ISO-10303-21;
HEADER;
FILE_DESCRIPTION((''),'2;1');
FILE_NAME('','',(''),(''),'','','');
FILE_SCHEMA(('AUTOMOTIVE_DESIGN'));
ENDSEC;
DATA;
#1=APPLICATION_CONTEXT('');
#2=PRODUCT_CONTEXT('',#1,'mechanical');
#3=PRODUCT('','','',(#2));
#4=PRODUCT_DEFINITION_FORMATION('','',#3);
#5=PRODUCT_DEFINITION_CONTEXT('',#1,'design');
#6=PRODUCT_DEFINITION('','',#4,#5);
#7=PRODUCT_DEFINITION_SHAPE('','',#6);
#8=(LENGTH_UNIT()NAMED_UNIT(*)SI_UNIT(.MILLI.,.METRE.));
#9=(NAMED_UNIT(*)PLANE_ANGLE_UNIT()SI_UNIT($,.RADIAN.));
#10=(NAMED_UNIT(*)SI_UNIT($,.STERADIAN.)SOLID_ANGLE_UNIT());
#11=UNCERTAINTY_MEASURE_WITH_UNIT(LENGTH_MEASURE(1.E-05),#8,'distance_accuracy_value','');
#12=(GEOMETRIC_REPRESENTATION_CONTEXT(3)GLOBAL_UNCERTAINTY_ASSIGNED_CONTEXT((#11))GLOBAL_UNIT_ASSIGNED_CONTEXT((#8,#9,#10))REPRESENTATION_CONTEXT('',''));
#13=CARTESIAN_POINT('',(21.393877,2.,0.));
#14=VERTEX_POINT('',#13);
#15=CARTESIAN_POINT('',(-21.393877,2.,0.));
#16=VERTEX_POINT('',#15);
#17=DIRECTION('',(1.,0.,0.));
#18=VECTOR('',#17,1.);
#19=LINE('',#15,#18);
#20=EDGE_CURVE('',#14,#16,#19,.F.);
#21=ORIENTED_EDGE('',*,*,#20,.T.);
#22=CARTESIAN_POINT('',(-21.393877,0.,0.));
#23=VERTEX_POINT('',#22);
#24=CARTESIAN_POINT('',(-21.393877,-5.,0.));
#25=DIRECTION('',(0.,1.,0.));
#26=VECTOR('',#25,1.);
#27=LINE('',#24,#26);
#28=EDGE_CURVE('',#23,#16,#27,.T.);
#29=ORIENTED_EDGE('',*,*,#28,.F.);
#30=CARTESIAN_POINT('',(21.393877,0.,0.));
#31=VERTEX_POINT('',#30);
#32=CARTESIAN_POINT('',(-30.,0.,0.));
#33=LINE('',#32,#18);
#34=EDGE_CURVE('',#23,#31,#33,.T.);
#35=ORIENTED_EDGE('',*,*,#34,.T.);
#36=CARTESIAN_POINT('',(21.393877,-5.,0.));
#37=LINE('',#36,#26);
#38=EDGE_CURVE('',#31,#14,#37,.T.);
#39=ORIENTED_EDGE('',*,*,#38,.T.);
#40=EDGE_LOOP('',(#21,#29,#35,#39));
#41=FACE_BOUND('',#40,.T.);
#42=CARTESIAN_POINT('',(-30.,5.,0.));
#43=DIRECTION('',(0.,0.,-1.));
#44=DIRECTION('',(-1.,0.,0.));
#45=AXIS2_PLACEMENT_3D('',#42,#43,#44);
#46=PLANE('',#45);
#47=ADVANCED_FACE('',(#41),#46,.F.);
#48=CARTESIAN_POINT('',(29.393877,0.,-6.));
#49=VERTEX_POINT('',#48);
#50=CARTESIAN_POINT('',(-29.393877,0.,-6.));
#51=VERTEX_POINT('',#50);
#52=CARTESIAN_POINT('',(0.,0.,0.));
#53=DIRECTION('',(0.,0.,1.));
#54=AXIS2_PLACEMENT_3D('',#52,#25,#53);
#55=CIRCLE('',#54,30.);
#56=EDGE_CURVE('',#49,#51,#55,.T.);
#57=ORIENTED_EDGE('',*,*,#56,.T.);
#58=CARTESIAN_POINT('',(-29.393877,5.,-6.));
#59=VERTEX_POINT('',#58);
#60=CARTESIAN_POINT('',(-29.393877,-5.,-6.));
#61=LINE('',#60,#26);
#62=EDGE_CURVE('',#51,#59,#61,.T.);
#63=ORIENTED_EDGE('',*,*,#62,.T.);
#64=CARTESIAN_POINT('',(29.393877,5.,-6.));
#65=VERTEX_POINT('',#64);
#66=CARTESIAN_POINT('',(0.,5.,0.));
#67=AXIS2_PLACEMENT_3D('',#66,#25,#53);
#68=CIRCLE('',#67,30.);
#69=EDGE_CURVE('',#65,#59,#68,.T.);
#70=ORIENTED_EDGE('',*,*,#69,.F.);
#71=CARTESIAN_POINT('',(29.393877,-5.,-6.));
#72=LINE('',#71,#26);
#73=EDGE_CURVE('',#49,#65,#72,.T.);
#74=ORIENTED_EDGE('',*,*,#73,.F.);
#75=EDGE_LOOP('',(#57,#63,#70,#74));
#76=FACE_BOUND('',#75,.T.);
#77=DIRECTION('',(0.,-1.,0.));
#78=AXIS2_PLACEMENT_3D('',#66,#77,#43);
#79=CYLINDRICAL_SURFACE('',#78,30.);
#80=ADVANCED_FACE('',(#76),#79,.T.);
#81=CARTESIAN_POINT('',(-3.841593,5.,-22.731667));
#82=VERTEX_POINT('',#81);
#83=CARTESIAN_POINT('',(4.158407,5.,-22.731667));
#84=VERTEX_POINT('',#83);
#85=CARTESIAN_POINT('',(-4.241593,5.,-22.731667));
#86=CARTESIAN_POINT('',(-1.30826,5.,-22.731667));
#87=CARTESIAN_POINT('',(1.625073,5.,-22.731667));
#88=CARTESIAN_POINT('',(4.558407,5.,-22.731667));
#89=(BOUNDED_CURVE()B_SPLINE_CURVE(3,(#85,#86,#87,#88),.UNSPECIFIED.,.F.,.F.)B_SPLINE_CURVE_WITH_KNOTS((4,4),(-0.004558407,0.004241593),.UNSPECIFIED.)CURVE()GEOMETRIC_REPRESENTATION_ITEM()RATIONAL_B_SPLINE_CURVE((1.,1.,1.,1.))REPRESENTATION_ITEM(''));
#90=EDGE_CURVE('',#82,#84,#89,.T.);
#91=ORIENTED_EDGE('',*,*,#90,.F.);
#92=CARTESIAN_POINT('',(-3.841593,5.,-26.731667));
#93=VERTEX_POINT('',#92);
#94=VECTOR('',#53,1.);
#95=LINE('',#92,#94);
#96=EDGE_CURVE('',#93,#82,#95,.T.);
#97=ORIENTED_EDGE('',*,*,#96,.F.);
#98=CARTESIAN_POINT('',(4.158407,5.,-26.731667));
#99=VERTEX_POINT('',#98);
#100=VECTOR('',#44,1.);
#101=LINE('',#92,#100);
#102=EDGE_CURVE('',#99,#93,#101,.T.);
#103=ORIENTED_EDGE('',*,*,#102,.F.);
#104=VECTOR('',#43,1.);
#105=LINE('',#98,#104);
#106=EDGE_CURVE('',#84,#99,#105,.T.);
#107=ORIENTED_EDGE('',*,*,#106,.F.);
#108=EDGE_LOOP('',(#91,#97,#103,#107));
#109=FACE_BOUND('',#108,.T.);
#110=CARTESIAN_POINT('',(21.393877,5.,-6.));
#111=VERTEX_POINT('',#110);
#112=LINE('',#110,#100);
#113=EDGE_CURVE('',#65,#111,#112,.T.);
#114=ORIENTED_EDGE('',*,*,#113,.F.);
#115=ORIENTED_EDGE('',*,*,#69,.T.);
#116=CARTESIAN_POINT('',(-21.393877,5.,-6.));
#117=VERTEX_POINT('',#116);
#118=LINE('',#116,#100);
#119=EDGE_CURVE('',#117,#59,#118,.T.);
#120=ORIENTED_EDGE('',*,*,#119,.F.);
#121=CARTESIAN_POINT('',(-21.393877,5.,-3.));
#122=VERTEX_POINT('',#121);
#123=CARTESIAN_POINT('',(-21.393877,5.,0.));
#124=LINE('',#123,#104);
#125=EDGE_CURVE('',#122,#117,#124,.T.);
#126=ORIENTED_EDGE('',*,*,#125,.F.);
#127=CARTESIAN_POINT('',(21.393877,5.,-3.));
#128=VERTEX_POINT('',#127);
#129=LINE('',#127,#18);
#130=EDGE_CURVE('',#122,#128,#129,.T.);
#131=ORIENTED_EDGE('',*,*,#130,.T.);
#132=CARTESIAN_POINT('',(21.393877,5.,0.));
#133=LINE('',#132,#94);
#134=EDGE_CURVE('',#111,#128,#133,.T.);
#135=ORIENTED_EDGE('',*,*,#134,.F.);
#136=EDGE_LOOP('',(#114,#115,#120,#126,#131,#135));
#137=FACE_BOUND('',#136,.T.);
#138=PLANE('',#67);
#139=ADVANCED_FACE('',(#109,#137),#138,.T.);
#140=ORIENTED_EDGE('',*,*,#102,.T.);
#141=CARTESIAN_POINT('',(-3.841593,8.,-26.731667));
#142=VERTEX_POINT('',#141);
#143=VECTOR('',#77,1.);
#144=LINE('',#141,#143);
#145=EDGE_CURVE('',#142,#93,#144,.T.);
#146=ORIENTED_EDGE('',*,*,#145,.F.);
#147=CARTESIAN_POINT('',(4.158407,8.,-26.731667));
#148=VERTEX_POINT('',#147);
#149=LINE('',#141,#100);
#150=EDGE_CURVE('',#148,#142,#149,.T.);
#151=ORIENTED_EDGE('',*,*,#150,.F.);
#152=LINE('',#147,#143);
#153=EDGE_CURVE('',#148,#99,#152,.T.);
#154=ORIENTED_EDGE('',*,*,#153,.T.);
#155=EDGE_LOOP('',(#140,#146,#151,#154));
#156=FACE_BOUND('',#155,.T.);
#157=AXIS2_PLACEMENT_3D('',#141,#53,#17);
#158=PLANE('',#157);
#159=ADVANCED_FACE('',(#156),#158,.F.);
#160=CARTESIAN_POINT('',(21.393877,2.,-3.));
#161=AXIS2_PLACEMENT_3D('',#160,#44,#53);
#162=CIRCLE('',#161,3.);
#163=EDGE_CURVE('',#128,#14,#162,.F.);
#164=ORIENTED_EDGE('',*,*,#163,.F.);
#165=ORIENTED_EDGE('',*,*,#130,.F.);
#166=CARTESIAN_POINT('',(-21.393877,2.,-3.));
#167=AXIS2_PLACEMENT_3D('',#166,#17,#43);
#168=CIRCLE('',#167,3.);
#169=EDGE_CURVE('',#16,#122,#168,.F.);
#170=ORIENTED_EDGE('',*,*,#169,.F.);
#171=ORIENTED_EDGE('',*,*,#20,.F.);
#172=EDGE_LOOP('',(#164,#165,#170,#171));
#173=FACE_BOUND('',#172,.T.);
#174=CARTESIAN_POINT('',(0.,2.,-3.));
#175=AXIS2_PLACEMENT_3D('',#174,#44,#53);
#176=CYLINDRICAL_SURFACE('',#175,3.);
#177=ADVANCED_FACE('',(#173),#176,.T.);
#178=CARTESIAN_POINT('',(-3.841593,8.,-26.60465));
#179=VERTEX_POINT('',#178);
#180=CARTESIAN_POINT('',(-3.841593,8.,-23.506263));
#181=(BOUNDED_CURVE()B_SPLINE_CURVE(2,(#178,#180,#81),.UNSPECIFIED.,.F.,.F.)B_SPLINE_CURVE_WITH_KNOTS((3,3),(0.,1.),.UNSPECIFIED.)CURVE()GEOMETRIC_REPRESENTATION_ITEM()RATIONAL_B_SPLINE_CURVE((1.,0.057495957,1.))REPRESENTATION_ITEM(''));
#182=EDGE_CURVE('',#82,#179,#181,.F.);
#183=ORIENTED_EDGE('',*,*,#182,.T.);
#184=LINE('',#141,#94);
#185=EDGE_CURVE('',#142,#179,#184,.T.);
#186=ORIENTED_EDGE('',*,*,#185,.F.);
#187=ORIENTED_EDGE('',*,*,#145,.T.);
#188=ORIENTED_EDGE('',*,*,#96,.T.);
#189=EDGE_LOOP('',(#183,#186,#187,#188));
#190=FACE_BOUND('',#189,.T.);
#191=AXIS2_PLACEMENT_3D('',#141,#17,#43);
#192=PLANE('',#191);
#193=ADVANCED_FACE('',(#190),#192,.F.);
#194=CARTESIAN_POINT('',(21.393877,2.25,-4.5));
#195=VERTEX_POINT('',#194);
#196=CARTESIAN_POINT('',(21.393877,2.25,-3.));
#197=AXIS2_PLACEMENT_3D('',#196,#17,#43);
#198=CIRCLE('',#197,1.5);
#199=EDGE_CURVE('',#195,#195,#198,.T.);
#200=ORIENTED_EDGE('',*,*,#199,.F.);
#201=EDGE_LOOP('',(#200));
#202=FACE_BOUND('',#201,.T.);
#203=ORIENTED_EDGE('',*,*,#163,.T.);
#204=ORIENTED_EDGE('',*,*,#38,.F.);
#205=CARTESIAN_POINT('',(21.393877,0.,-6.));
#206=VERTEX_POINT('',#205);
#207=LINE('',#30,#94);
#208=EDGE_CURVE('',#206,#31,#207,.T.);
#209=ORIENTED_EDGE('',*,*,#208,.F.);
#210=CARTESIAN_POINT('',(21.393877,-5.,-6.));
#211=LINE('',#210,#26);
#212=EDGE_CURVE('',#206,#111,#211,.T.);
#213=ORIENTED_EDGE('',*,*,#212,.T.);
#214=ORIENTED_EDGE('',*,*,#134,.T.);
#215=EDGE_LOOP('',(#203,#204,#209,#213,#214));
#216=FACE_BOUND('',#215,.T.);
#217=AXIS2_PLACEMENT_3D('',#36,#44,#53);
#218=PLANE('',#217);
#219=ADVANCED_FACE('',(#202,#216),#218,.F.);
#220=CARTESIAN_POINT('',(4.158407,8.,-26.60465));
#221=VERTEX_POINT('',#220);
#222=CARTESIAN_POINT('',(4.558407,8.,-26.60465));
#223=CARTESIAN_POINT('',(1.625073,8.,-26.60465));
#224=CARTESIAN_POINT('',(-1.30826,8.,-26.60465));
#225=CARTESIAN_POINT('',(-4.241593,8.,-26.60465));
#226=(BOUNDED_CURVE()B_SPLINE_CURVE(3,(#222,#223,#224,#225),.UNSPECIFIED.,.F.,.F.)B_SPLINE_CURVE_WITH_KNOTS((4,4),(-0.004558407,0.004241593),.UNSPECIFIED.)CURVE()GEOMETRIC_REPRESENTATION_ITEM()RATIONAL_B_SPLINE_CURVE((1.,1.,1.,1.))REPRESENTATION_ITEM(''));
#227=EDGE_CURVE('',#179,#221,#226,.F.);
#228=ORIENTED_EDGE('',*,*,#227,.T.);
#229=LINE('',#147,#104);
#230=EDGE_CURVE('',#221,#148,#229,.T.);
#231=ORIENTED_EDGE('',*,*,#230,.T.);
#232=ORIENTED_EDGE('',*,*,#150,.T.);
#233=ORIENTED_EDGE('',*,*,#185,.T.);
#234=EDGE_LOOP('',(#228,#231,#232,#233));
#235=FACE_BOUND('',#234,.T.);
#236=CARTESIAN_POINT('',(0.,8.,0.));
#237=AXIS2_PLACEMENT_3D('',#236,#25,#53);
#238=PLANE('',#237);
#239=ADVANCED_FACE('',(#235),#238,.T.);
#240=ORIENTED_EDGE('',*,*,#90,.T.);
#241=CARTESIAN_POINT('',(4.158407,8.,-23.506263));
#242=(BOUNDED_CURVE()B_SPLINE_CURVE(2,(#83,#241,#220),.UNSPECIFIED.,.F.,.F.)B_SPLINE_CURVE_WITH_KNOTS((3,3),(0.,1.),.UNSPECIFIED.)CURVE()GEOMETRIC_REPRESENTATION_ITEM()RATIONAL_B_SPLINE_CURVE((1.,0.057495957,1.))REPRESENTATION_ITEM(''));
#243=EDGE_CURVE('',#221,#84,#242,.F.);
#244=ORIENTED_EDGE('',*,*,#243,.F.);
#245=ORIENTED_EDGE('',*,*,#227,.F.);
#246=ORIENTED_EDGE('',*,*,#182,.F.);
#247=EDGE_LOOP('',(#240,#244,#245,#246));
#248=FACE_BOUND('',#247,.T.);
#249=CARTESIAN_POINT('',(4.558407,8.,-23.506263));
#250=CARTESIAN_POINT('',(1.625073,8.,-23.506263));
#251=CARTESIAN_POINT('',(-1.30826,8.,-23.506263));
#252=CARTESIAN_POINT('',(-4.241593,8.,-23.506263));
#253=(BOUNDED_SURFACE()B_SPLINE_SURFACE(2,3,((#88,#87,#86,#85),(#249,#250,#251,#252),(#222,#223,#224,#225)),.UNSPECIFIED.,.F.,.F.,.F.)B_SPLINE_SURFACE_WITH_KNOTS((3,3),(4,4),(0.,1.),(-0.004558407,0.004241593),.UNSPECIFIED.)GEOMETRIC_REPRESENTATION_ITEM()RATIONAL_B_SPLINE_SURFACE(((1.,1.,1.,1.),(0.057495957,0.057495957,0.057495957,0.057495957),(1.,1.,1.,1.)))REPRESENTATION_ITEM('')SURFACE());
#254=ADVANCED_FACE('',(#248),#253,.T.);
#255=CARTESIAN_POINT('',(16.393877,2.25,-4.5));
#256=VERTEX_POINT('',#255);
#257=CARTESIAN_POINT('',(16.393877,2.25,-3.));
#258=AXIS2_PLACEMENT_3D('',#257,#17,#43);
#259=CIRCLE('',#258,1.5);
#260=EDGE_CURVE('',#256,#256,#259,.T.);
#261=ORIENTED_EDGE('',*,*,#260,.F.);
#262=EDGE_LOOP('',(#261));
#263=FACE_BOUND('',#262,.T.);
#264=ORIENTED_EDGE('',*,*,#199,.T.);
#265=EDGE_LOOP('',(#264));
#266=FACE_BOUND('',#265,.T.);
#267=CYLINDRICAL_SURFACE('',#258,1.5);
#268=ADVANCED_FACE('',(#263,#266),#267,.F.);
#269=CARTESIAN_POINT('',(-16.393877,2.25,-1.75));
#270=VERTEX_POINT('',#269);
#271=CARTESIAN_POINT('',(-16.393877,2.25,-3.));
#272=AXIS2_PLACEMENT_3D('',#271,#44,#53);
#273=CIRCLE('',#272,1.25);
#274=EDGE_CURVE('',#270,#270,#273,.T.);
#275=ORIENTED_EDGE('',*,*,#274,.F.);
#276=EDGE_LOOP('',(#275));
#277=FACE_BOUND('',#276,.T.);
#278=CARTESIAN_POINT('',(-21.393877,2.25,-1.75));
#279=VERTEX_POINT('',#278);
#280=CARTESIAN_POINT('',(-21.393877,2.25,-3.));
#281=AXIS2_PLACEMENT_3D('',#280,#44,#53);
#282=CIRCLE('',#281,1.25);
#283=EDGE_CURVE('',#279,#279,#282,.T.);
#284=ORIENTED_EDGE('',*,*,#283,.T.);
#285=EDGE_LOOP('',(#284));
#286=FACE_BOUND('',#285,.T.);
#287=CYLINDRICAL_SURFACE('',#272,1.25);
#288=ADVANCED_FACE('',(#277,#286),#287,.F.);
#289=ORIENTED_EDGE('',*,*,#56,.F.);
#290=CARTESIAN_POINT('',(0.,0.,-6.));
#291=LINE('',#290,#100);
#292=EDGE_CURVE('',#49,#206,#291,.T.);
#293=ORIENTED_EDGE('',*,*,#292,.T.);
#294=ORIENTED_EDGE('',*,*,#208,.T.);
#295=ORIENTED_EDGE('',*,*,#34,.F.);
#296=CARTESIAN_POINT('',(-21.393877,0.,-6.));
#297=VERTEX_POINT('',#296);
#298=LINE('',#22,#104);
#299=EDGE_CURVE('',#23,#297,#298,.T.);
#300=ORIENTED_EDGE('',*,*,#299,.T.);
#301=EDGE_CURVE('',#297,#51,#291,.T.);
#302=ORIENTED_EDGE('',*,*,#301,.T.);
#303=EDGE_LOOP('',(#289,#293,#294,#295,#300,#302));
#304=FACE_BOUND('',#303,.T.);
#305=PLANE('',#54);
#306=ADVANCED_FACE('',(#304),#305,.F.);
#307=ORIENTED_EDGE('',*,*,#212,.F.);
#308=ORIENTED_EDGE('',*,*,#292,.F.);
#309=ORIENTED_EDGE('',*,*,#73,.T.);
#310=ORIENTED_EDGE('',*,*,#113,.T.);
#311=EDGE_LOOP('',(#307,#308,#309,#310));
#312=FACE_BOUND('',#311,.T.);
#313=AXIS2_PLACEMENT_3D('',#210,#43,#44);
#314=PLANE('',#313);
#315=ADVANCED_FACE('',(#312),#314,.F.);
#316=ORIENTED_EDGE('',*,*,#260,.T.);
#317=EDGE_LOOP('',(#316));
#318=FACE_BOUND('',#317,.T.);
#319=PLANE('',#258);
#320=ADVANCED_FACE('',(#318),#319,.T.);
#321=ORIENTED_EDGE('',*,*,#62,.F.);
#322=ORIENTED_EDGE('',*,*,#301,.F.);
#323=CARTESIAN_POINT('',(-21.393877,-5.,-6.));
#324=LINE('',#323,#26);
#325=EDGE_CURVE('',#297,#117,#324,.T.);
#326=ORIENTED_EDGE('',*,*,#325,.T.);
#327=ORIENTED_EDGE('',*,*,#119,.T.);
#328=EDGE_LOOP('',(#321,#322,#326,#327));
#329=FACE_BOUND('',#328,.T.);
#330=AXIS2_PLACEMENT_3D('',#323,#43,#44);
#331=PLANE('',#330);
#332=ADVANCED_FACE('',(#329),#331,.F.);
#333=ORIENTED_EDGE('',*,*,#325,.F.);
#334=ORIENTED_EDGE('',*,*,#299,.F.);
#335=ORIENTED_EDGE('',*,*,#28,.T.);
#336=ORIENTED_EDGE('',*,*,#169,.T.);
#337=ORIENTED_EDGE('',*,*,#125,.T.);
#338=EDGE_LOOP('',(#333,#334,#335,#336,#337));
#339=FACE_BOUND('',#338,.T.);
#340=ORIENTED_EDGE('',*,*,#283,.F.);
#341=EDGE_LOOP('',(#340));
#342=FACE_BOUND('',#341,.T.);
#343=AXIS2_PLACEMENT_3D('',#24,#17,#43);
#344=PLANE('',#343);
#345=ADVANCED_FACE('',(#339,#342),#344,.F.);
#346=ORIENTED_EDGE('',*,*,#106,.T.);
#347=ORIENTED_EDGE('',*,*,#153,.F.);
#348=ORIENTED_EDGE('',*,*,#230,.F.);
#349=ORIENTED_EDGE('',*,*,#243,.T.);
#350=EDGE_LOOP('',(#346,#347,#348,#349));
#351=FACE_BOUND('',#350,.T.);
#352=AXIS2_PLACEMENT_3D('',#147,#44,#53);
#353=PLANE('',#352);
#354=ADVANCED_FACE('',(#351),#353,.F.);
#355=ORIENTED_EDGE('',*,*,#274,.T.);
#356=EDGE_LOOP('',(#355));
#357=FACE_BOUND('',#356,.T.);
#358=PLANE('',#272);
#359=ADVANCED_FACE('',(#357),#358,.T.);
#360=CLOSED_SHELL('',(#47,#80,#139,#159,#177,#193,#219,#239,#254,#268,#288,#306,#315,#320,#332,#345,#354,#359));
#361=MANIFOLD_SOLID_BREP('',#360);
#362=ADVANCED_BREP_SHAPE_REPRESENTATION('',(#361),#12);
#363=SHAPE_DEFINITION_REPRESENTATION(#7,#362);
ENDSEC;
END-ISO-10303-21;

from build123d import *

# Parameters (mm, degrees)
BOSS_EXTRUDE1_DEPTH = 5
SKETCH3_W           = 8
SKETCH3_H           = 4
BOSS_EXTRUDE2_DEPTH = 3
FILLET1_START       = -3.841593316
FILLET1_DEPTH       = 8
CUT_EXTRUDE1_START  = -10
CUT_EXTRUDE1_DEPTH  = 10
FILLET2_R           = 3
SKETCH6_R           = 1.5
CUT_EXTRUDE2_DEPTH  = 5
SKETCH7_R           = 1.25
CUT_EXTRUDE3_DEPTH  = 5


with BuildPart() as part:
    # Sketch1 → Boss-Extrude1 (new body)
    with BuildSketch(Plane(origin=(0, 0, 0), x_dir=(1, 0, 0), z_dir=(0, 1, 0))):
        with BuildLine():
            Line((-30, 0), (30, 0))
            ThreePointArc((30, 0), (0, 30), (-30, 0))
        make_face()
    extrude(amount=BOSS_EXTRUDE1_DEPTH)

    # Sketch3 → Boss-Extrude2 (add)
    with BuildSketch(Plane(origin=(0, 5, 0), x_dir=(1, 0, 0), z_dir=(0, 1, 0))):
        with Locations((0.158406684, 24.731666579)):
            Rectangle(SKETCH3_W, SKETCH3_H)
    extrude(amount=BOSS_EXTRUDE2_DEPTH)

    # Fillet1: read off the stored shape, not the designer's step
    # Fillet1 outline → Fillet1 (cut)
    with BuildSketch(Plane.YZ.offset(FILLET1_START)):
        with BuildLine():
            Line((8, -22.731666579), (5, -22.731666579))
            add(Edge.make_bspline(
                [(5, -22.731666579), (8, -23.506263249), (8, -26.604649926)],
                knots=[0, 0, 0, 1, 1, 1], degree=2, weights=[1, 0.057495957, 1]))
            Line((8, -26.604649926), (8, -22.731666579))
        make_face()
    extrude(amount=FILLET1_DEPTH, mode=Mode.SUBTRACT)

    # Sketch5 → Cut-Extrude1 (cut)
    with BuildSketch(Plane(origin=(0, 5, 0), x_dir=(1, 0, 0), z_dir=(0, 1, 0)).offset(CUT_EXTRUDE1_START)):
        with BuildLine():
            Line((-21.393876913, 0), (-21.393876913, 6))
            Line((-21.393876913, 6), (-29.393876913, 6))
            ThreePointArc((-29.393876913, 6), (-29.84808459, 3.01526886), (-30, 0))
            Line((-30, 0), (-21.393876913, 0))
        make_face()
        with BuildLine():
            Line((21.393876913, 6), (29.393876913, 6))
            ThreePointArc((29.393876913, 6), (29.84808459, 3.01526886), (30, 0))
            Line((30, 0), (21.393876913, 0))
            Line((21.393876913, 0), (21.393876913, 6))
        make_face()
    extrude(amount=CUT_EXTRUDE1_DEPTH, mode=Mode.SUBTRACT)

    # Fillet2
    fillet2_edges = [part.edges().sort_by_distance(p)[0] for p in [
        (0, 5, 0),
    ]]
    fillet(fillet2_edges, radius=FILLET2_R)

    # Sketch6 → Cut-Extrude2 (cut)
    with BuildSketch(Plane(origin=(21.393876913, 0, 0), x_dir=(0, 0, -1), z_dir=(1, 0, 0))):
        with Locations((3, 2.25)):
            Circle(SKETCH6_R)
    extrude(amount=-CUT_EXTRUDE2_DEPTH, mode=Mode.SUBTRACT)

    # Sketch7 → Cut-Extrude3 (cut)
    with BuildSketch(Plane.ZY.offset(21.393876913)):
        with Locations((-3, 2.25)):
            Circle(SKETCH7_R)
    extrude(amount=-CUT_EXTRUDE3_DEPTH, mode=Mode.SUBTRACT)


solid = part.part
